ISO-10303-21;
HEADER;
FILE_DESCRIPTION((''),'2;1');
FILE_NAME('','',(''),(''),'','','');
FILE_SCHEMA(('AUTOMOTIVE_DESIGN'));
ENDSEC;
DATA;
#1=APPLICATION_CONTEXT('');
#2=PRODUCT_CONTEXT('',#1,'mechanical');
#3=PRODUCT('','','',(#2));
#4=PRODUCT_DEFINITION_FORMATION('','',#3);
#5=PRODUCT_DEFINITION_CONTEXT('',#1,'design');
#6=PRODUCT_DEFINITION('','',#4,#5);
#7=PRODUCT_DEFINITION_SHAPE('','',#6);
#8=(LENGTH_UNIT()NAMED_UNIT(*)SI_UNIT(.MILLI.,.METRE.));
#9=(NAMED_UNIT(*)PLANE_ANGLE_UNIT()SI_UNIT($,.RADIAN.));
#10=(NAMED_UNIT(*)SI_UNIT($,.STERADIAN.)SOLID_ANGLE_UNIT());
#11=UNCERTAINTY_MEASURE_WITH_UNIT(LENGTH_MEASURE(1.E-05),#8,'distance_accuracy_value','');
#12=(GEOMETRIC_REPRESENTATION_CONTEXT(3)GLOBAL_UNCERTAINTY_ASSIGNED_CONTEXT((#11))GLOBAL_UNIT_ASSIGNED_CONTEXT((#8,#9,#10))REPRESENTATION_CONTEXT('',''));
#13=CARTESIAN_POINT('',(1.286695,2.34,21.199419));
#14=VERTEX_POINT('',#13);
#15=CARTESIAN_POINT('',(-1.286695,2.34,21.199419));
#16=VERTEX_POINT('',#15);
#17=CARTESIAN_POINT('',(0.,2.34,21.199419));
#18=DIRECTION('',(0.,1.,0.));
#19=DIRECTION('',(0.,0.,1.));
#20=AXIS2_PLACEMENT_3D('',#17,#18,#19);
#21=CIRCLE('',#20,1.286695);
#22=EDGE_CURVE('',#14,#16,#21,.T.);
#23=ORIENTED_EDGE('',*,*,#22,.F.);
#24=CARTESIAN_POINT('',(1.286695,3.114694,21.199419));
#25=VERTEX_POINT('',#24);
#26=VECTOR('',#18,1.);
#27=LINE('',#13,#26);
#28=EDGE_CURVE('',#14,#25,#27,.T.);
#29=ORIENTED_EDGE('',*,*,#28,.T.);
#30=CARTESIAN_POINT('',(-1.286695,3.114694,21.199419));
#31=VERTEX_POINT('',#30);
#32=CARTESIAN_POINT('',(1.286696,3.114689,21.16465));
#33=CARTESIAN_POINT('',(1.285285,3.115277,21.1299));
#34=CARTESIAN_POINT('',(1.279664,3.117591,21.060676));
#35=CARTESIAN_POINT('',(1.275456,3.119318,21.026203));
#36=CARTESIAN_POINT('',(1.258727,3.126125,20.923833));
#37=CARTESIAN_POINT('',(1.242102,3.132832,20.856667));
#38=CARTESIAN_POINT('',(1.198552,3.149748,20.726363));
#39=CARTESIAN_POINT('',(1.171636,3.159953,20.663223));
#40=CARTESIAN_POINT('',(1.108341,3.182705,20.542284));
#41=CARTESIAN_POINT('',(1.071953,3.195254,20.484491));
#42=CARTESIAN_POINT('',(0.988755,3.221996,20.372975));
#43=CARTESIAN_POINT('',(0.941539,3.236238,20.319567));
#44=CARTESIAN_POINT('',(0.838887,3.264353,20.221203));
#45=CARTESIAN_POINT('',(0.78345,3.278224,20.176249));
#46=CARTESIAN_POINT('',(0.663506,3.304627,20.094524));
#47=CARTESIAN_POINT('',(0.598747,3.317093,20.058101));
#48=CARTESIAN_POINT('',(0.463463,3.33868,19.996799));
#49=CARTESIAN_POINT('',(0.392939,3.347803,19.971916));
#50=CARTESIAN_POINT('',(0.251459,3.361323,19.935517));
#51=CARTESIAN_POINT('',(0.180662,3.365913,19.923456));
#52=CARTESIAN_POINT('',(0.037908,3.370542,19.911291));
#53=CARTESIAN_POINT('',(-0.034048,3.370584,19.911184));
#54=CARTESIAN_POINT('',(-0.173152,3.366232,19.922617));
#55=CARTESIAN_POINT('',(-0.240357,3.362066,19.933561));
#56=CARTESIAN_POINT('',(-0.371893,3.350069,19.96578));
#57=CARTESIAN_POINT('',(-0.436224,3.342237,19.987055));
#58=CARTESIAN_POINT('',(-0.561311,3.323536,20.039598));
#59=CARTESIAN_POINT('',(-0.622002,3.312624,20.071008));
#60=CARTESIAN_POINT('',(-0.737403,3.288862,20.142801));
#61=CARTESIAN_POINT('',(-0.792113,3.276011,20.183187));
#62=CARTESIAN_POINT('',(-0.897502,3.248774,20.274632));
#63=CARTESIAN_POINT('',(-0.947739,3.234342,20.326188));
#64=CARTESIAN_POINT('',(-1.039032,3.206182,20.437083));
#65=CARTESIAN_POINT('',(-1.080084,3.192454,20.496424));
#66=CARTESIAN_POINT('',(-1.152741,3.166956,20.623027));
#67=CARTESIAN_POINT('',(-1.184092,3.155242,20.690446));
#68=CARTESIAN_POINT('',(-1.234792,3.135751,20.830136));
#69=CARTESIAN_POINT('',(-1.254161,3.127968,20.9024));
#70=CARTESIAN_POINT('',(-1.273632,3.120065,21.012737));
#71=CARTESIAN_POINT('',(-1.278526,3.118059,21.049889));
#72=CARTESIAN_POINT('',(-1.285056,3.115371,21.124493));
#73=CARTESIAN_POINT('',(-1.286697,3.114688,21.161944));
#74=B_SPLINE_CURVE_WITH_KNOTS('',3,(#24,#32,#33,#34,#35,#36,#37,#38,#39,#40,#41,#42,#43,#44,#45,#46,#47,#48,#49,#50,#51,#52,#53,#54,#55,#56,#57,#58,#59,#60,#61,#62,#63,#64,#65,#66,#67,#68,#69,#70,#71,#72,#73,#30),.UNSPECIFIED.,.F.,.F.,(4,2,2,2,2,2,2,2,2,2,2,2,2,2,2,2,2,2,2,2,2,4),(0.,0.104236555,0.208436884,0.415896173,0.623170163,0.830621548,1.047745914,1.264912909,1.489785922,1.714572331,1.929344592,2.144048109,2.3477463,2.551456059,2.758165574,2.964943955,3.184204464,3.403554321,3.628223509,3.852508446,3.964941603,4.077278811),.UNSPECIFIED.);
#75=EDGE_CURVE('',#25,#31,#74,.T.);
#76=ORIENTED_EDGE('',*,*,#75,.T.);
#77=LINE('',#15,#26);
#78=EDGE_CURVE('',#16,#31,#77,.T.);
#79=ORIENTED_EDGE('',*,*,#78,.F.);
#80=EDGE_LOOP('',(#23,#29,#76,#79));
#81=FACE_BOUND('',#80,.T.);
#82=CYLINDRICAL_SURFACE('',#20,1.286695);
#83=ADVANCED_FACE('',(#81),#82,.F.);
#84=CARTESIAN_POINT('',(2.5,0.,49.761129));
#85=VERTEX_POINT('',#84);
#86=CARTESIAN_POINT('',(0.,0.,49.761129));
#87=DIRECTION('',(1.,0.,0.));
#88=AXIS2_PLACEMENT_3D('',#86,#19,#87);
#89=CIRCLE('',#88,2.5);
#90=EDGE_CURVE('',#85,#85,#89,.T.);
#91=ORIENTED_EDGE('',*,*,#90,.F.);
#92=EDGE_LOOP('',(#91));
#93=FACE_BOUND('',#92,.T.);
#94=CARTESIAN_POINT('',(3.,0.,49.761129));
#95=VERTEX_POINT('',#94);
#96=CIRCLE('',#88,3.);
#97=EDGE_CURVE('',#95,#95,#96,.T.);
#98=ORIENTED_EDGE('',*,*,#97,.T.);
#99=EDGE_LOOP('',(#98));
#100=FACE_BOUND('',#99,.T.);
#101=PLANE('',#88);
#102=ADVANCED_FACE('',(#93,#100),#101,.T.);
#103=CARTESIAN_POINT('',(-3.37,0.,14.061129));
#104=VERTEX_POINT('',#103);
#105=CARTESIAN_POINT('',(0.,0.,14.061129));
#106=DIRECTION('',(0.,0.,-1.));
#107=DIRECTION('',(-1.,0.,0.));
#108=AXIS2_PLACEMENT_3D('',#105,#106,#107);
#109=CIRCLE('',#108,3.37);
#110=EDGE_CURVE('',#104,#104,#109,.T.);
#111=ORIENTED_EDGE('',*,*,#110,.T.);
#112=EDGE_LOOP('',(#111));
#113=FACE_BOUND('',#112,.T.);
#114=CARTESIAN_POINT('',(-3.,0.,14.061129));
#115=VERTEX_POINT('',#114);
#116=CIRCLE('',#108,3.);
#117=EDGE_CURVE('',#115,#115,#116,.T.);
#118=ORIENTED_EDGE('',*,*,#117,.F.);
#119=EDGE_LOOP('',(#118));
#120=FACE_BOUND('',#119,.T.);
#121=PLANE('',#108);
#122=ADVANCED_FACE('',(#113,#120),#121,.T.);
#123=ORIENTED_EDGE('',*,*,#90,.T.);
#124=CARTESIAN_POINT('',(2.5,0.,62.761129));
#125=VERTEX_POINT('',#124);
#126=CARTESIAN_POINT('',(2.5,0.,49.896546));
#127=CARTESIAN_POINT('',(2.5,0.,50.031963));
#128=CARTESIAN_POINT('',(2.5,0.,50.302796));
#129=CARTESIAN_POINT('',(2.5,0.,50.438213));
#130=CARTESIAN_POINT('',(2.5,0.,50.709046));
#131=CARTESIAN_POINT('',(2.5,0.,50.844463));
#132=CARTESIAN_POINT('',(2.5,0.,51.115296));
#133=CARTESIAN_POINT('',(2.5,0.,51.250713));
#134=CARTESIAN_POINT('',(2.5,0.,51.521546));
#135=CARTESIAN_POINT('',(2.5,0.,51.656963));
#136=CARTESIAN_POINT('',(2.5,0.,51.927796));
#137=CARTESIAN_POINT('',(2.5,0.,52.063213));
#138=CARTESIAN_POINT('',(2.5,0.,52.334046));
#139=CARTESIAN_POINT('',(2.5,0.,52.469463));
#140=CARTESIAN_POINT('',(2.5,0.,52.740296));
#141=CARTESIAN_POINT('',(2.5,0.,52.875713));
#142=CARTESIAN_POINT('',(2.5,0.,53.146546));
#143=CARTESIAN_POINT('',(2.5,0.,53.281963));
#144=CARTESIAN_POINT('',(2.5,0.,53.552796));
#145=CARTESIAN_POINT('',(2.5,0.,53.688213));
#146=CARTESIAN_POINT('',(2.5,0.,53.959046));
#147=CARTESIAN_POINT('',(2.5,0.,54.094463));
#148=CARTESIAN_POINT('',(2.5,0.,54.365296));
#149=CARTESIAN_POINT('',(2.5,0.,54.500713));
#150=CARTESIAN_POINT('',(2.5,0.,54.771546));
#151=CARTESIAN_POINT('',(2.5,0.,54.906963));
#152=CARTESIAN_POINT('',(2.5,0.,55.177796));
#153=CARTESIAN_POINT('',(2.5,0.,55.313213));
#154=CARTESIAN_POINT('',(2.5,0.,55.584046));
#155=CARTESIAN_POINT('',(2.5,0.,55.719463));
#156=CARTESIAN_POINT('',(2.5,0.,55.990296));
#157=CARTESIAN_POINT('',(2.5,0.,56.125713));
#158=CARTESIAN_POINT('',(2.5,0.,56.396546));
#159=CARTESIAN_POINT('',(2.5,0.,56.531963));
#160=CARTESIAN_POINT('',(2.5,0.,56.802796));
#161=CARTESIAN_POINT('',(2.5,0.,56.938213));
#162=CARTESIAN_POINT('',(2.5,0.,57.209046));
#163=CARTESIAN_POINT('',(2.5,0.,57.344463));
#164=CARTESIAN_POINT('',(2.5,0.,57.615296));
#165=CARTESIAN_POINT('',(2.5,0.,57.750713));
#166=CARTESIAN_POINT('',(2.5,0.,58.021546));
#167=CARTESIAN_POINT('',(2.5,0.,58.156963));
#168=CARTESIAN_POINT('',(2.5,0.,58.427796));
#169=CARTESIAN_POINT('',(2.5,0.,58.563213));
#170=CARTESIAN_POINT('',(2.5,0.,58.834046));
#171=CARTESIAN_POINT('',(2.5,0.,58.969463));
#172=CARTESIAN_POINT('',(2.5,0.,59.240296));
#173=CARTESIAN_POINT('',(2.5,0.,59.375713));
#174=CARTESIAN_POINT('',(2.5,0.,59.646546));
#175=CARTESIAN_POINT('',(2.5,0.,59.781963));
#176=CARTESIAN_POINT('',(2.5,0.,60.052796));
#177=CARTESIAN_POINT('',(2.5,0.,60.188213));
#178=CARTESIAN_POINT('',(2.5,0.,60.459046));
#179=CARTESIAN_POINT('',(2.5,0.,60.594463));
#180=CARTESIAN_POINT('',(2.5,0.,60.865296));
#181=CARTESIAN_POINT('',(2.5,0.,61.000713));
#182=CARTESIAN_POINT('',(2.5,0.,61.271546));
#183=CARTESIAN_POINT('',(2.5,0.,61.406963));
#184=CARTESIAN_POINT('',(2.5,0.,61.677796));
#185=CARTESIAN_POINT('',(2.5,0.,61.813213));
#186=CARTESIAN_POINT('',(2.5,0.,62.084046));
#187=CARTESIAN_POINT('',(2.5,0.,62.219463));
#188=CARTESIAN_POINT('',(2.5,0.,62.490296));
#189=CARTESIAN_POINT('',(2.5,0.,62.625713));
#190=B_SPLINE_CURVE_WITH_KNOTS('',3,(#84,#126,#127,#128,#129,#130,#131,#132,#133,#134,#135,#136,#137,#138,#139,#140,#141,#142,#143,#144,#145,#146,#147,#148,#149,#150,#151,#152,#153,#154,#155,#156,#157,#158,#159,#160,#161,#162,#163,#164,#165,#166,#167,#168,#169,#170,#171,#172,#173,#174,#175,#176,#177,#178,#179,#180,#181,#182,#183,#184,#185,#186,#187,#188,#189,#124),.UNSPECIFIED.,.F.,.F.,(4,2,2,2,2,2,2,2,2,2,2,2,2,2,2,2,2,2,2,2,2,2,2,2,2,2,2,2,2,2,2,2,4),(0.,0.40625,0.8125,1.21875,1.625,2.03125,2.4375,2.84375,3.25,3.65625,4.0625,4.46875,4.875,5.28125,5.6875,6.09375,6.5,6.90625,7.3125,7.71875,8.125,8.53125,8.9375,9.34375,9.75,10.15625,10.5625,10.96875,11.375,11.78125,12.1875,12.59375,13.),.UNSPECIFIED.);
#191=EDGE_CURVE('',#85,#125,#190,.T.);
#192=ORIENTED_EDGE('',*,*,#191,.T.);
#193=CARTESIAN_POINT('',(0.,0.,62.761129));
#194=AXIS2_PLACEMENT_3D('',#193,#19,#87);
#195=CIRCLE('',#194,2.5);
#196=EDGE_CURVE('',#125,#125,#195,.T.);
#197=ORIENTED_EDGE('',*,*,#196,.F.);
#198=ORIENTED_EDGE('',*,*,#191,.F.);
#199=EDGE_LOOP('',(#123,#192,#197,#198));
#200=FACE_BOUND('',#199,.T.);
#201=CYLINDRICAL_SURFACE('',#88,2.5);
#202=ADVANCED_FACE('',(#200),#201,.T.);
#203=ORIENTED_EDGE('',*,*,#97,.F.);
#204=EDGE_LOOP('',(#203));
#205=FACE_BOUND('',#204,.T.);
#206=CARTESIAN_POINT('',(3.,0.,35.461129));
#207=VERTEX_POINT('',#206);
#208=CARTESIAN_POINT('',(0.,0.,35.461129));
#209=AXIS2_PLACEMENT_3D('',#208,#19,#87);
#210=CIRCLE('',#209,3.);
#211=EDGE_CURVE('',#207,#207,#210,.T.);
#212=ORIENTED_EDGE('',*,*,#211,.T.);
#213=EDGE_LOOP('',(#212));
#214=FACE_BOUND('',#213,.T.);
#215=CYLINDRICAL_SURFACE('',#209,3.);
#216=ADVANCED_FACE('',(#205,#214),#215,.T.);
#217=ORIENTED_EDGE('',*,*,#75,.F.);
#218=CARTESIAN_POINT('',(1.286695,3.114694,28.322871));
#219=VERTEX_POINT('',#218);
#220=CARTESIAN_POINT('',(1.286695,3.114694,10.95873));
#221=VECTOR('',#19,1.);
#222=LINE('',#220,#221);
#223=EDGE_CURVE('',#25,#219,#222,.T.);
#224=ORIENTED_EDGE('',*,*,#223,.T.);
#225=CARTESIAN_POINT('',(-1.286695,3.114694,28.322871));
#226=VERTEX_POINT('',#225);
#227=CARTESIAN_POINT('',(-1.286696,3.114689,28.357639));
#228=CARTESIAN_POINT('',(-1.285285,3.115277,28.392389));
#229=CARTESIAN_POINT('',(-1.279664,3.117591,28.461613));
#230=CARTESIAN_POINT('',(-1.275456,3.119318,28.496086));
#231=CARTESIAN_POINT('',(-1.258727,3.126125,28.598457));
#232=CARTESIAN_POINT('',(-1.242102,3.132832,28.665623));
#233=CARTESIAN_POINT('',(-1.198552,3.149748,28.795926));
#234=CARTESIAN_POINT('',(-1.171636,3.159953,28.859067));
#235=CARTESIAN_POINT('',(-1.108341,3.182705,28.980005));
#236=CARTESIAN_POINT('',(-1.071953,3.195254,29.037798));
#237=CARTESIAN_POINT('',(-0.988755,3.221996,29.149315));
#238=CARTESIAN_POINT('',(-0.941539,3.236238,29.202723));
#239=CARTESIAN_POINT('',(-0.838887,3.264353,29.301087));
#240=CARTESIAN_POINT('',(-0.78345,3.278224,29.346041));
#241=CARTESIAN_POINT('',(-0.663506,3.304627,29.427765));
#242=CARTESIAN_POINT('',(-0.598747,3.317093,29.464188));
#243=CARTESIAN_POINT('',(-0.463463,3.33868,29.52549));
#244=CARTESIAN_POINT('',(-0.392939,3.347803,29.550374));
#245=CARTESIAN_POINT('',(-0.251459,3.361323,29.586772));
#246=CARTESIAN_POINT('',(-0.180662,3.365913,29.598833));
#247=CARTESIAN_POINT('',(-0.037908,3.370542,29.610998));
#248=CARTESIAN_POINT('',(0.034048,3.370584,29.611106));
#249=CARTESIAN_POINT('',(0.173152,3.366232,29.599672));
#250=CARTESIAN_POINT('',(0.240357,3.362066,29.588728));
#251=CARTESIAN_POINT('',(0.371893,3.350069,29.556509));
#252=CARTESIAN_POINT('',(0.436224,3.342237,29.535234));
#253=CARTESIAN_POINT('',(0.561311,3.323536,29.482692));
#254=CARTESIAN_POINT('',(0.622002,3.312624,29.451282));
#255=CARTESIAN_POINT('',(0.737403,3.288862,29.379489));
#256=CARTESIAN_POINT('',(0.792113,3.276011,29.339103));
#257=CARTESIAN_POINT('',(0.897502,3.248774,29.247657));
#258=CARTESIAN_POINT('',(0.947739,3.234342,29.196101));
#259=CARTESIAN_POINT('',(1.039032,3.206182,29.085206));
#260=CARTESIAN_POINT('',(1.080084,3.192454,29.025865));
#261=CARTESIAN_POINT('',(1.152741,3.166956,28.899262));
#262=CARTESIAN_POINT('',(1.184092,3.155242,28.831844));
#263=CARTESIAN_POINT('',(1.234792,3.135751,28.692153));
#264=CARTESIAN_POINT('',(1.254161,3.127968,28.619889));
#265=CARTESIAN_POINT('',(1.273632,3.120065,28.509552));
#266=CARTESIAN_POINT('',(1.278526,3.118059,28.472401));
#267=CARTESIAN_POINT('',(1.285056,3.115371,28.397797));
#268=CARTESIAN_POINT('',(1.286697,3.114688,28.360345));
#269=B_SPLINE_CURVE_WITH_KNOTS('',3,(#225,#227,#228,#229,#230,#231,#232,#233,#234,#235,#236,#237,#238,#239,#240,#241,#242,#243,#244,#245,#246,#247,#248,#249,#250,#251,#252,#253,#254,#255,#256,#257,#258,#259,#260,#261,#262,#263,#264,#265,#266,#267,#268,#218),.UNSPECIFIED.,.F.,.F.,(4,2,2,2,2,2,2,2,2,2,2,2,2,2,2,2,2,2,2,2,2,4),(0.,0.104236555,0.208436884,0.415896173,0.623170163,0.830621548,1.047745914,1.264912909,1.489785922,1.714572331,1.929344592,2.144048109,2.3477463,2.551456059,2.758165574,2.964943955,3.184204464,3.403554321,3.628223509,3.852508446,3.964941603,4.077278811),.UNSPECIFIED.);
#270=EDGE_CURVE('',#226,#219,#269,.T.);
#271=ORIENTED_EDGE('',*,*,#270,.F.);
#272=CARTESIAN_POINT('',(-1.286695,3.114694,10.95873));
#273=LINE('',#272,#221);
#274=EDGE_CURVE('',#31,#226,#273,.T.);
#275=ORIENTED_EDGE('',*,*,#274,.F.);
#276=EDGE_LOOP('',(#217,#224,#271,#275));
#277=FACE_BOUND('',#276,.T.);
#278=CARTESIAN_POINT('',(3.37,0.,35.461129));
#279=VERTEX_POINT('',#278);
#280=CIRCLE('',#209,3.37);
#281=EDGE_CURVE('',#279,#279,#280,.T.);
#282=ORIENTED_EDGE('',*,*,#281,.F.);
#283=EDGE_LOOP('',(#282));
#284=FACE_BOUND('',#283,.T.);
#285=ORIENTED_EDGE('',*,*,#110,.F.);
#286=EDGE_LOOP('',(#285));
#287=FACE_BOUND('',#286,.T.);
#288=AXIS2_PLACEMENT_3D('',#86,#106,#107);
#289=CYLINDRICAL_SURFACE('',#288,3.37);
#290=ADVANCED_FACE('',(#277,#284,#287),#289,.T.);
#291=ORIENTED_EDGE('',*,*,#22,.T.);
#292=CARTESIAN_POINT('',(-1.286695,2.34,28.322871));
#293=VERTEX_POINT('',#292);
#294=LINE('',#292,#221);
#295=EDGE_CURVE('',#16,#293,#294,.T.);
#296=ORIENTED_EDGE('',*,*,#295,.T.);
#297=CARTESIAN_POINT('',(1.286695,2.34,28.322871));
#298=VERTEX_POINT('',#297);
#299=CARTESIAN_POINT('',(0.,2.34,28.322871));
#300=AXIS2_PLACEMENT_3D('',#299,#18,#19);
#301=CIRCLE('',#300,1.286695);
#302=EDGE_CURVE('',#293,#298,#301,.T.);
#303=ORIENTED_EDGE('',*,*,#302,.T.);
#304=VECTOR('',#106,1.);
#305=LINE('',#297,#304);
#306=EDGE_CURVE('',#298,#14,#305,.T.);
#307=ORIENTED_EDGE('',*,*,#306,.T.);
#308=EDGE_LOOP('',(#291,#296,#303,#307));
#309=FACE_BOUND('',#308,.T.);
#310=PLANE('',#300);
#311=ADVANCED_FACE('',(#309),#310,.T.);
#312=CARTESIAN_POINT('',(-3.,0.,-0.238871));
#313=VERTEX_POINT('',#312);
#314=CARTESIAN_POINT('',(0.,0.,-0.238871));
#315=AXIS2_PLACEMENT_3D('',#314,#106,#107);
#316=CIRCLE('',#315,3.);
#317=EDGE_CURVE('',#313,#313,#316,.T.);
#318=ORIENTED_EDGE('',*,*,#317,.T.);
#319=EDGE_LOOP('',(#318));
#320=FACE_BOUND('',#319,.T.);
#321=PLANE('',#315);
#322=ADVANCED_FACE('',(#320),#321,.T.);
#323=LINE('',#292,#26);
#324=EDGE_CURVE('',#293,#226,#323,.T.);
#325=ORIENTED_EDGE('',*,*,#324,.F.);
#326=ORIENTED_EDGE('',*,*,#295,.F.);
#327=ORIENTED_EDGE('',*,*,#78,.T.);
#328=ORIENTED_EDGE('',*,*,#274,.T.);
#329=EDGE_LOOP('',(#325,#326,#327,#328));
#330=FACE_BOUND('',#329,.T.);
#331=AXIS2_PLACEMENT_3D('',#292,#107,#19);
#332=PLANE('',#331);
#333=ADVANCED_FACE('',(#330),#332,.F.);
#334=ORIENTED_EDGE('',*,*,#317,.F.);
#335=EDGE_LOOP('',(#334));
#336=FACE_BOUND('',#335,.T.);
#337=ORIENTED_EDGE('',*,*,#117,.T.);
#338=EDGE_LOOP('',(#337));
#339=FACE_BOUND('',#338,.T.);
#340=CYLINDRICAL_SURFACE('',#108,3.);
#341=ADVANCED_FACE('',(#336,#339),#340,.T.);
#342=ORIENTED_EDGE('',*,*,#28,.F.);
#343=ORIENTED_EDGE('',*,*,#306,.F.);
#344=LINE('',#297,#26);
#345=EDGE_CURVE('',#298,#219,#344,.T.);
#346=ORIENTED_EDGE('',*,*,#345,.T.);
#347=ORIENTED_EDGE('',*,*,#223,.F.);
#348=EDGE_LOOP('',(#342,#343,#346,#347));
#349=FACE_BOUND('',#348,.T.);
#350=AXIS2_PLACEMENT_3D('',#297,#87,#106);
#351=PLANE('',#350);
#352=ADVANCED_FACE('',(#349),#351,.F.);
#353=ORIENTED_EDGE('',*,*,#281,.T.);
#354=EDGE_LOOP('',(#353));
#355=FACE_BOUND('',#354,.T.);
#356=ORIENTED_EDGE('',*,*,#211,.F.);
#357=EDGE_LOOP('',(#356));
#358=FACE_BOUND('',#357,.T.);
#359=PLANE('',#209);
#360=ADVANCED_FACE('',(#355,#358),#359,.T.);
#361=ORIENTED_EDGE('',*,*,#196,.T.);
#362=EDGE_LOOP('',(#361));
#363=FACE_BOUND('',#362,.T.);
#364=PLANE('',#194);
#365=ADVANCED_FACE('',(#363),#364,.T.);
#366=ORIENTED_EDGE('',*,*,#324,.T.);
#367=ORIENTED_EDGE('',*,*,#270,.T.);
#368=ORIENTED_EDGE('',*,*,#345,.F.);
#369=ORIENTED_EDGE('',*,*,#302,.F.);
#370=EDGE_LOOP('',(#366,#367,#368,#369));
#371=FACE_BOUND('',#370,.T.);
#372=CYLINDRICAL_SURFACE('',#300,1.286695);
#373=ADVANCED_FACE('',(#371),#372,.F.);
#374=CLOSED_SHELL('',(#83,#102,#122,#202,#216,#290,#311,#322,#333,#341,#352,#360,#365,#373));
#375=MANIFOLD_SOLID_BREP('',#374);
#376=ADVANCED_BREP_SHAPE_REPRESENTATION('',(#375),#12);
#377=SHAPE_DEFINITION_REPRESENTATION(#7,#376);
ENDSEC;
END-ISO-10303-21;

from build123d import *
from OCP.BRepAlgoAPI import BRepAlgoAPI_Cut
from OCP.TopTools import TopTools_ListOfShape

# Parameters (mm, degrees)
EXTRUDE_START       = -0.238871
SKETCH_1_R          = 3.37
EXTRUDE_1_DEPTH     = 50.000001
EXTRUDE_START_2     = 21.199419
EXTRUDE_2_DEPTH     = 7.123452
SKETCH_3_R          = 3.37
EXTRUDE_3_DEPTH     = 13
CUT_EXTRUDE_START   = -13
SKETCH_4_R          = 3.37
SKETCH_4_R_2        = 2.5
CUT_EXTRUDE_1_DEPTH = 13
CUT_EXTRUDE_START_2 = -14.3
SKETCH_5_R          = 3.37
SKETCH_5_R_2        = 3
CUT_EXTRUDE_2_DEPTH = 14.3
SKETCH_6_R          = 3.37
SKETCH_6_R_2        = 3
CUT_EXTRUDE_3_DEPTH = 14.3
CUT_EXTRUDE_4_DEPTH = 2


with BuildPart() as part:
    # 草图1 → 凸台-拉伸1 (new body)
    with BuildSketch(Plane.XY.offset(EXTRUDE_START)):
        with Locations(Location((0, 0, 0), (0, 0, 180))):
            Circle(SKETCH_1_R)
    extrude(amount=EXTRUDE_1_DEPTH)

    # 草图2 → 凸台-拉伸2 (add)
    with BuildSketch(Plane.XY.offset(EXTRUDE_START_2)):
        with BuildLine():
            Line((-1.286694662, 4.34), (1.286694662, 4.34))
            Line((1.286694662, 4.34), (1.286694662, 3.1146937))
            ThreePointArc((1.286694662, 3.1146937), (0, -3.37), (-1.286694662, 3.1146937))
            Line((-1.286694662, 3.1146937), (-1.286694662, 4.34))
        make_face()
    extrude(amount=EXTRUDE_2_DEPTH)

    # 草图3 → 凸台-拉伸3 (add)
    with BuildSketch(Plane.XY.offset(49.761129495)):
        with Locations(Location((0, 0, 0), (0, 0, 180))):
            Circle(SKETCH_3_R)
    extrude(amount=EXTRUDE_3_DEPTH)

    # 草图4 → 切除-拉伸1 (cut)
    with BuildSketch(Plane.XY.offset(62.761129495).offset(CUT_EXTRUDE_START)):
        with Locations(Location((0, 0, 0), (0, 0, 180))):
            Circle(SKETCH_4_R)
        Circle(SKETCH_4_R_2, mode=Mode.SUBTRACT)
    extrude(amount=CUT_EXTRUDE_1_DEPTH, mode=Mode.SUBTRACT)

    # 草图5 → 切除-拉伸2 (cut)
    with BuildSketch(Plane.XY.offset(49.761129495).offset(CUT_EXTRUDE_START_2)):
        with Locations(Location((0, 0, 0), (0, 0, 180))):
            Circle(SKETCH_5_R)
        Circle(SKETCH_5_R_2, mode=Mode.SUBTRACT)
    extrude(amount=CUT_EXTRUDE_2_DEPTH, mode=Mode.SUBTRACT)


with BuildPart() as cut_extrude_3_tool:
    # 草图6 → 切除-拉伸3 (new body)
    with BuildSketch(Plane(origin=(0, 0, -0.238870505), x_dir=(-1, 0, 0), z_dir=(0, 0, -1))):
        Circle(SKETCH_6_R)
        with Locations(Location((0, 0, 0), (0, 0, 180))):
            Circle(SKETCH_6_R_2, mode=Mode.SUBTRACT)
    extrude(amount=-CUT_EXTRUDE_3_DEPTH)


with BuildPart() as part_1:
    add(part.part)

    # 切除-拉伸3: cut by cut_extrude_3_tool, with a tolerance
    cut_extrude_3_stock = TopTools_ListOfShape()
    cut_extrude_3_stock.Append(part_1.part.wrapped)
    cut_extrude_3_tools = TopTools_ListOfShape()
    cut_extrude_3_tools.Append(cut_extrude_3_tool.part.wrapped)
    cut_extrude_3_cut = BRepAlgoAPI_Cut()
    cut_extrude_3_cut.SetArguments(cut_extrude_3_stock)
    cut_extrude_3_cut.SetTools(cut_extrude_3_tools)
    cut_extrude_3_cut.SetFuzzyValue(0.00001)
    cut_extrude_3_cut.Build()
    add(Compound.cast(cut_extrude_3_cut.Shape()).solids(), mode=Mode.REPLACE)

    # 草图7 → 切除-拉伸4 (cut)
    with BuildSketch(Plane(origin=(0, 4.34, 0), x_dir=(1, 0, 0), z_dir=(0, 1, 0))):
        with BuildLine():
            Line((-1.286694662, -28.322870736), (-1.286694662, -21.199418736))
            ThreePointArc((-1.286694662, -21.199418736), (0, -19.912724074), (1.286694662, -21.199418736))
            Line((1.286694662, -21.199418736), (1.286694662, -28.322870736))
            ThreePointArc((1.286694662, -28.322870736), (0, -29.609565398), (-1.286694662, -28.322870736))
        make_face()
    extrude(amount=-CUT_EXTRUDE_4_DEPTH, mode=Mode.SUBTRACT)


solid = part_1.part
